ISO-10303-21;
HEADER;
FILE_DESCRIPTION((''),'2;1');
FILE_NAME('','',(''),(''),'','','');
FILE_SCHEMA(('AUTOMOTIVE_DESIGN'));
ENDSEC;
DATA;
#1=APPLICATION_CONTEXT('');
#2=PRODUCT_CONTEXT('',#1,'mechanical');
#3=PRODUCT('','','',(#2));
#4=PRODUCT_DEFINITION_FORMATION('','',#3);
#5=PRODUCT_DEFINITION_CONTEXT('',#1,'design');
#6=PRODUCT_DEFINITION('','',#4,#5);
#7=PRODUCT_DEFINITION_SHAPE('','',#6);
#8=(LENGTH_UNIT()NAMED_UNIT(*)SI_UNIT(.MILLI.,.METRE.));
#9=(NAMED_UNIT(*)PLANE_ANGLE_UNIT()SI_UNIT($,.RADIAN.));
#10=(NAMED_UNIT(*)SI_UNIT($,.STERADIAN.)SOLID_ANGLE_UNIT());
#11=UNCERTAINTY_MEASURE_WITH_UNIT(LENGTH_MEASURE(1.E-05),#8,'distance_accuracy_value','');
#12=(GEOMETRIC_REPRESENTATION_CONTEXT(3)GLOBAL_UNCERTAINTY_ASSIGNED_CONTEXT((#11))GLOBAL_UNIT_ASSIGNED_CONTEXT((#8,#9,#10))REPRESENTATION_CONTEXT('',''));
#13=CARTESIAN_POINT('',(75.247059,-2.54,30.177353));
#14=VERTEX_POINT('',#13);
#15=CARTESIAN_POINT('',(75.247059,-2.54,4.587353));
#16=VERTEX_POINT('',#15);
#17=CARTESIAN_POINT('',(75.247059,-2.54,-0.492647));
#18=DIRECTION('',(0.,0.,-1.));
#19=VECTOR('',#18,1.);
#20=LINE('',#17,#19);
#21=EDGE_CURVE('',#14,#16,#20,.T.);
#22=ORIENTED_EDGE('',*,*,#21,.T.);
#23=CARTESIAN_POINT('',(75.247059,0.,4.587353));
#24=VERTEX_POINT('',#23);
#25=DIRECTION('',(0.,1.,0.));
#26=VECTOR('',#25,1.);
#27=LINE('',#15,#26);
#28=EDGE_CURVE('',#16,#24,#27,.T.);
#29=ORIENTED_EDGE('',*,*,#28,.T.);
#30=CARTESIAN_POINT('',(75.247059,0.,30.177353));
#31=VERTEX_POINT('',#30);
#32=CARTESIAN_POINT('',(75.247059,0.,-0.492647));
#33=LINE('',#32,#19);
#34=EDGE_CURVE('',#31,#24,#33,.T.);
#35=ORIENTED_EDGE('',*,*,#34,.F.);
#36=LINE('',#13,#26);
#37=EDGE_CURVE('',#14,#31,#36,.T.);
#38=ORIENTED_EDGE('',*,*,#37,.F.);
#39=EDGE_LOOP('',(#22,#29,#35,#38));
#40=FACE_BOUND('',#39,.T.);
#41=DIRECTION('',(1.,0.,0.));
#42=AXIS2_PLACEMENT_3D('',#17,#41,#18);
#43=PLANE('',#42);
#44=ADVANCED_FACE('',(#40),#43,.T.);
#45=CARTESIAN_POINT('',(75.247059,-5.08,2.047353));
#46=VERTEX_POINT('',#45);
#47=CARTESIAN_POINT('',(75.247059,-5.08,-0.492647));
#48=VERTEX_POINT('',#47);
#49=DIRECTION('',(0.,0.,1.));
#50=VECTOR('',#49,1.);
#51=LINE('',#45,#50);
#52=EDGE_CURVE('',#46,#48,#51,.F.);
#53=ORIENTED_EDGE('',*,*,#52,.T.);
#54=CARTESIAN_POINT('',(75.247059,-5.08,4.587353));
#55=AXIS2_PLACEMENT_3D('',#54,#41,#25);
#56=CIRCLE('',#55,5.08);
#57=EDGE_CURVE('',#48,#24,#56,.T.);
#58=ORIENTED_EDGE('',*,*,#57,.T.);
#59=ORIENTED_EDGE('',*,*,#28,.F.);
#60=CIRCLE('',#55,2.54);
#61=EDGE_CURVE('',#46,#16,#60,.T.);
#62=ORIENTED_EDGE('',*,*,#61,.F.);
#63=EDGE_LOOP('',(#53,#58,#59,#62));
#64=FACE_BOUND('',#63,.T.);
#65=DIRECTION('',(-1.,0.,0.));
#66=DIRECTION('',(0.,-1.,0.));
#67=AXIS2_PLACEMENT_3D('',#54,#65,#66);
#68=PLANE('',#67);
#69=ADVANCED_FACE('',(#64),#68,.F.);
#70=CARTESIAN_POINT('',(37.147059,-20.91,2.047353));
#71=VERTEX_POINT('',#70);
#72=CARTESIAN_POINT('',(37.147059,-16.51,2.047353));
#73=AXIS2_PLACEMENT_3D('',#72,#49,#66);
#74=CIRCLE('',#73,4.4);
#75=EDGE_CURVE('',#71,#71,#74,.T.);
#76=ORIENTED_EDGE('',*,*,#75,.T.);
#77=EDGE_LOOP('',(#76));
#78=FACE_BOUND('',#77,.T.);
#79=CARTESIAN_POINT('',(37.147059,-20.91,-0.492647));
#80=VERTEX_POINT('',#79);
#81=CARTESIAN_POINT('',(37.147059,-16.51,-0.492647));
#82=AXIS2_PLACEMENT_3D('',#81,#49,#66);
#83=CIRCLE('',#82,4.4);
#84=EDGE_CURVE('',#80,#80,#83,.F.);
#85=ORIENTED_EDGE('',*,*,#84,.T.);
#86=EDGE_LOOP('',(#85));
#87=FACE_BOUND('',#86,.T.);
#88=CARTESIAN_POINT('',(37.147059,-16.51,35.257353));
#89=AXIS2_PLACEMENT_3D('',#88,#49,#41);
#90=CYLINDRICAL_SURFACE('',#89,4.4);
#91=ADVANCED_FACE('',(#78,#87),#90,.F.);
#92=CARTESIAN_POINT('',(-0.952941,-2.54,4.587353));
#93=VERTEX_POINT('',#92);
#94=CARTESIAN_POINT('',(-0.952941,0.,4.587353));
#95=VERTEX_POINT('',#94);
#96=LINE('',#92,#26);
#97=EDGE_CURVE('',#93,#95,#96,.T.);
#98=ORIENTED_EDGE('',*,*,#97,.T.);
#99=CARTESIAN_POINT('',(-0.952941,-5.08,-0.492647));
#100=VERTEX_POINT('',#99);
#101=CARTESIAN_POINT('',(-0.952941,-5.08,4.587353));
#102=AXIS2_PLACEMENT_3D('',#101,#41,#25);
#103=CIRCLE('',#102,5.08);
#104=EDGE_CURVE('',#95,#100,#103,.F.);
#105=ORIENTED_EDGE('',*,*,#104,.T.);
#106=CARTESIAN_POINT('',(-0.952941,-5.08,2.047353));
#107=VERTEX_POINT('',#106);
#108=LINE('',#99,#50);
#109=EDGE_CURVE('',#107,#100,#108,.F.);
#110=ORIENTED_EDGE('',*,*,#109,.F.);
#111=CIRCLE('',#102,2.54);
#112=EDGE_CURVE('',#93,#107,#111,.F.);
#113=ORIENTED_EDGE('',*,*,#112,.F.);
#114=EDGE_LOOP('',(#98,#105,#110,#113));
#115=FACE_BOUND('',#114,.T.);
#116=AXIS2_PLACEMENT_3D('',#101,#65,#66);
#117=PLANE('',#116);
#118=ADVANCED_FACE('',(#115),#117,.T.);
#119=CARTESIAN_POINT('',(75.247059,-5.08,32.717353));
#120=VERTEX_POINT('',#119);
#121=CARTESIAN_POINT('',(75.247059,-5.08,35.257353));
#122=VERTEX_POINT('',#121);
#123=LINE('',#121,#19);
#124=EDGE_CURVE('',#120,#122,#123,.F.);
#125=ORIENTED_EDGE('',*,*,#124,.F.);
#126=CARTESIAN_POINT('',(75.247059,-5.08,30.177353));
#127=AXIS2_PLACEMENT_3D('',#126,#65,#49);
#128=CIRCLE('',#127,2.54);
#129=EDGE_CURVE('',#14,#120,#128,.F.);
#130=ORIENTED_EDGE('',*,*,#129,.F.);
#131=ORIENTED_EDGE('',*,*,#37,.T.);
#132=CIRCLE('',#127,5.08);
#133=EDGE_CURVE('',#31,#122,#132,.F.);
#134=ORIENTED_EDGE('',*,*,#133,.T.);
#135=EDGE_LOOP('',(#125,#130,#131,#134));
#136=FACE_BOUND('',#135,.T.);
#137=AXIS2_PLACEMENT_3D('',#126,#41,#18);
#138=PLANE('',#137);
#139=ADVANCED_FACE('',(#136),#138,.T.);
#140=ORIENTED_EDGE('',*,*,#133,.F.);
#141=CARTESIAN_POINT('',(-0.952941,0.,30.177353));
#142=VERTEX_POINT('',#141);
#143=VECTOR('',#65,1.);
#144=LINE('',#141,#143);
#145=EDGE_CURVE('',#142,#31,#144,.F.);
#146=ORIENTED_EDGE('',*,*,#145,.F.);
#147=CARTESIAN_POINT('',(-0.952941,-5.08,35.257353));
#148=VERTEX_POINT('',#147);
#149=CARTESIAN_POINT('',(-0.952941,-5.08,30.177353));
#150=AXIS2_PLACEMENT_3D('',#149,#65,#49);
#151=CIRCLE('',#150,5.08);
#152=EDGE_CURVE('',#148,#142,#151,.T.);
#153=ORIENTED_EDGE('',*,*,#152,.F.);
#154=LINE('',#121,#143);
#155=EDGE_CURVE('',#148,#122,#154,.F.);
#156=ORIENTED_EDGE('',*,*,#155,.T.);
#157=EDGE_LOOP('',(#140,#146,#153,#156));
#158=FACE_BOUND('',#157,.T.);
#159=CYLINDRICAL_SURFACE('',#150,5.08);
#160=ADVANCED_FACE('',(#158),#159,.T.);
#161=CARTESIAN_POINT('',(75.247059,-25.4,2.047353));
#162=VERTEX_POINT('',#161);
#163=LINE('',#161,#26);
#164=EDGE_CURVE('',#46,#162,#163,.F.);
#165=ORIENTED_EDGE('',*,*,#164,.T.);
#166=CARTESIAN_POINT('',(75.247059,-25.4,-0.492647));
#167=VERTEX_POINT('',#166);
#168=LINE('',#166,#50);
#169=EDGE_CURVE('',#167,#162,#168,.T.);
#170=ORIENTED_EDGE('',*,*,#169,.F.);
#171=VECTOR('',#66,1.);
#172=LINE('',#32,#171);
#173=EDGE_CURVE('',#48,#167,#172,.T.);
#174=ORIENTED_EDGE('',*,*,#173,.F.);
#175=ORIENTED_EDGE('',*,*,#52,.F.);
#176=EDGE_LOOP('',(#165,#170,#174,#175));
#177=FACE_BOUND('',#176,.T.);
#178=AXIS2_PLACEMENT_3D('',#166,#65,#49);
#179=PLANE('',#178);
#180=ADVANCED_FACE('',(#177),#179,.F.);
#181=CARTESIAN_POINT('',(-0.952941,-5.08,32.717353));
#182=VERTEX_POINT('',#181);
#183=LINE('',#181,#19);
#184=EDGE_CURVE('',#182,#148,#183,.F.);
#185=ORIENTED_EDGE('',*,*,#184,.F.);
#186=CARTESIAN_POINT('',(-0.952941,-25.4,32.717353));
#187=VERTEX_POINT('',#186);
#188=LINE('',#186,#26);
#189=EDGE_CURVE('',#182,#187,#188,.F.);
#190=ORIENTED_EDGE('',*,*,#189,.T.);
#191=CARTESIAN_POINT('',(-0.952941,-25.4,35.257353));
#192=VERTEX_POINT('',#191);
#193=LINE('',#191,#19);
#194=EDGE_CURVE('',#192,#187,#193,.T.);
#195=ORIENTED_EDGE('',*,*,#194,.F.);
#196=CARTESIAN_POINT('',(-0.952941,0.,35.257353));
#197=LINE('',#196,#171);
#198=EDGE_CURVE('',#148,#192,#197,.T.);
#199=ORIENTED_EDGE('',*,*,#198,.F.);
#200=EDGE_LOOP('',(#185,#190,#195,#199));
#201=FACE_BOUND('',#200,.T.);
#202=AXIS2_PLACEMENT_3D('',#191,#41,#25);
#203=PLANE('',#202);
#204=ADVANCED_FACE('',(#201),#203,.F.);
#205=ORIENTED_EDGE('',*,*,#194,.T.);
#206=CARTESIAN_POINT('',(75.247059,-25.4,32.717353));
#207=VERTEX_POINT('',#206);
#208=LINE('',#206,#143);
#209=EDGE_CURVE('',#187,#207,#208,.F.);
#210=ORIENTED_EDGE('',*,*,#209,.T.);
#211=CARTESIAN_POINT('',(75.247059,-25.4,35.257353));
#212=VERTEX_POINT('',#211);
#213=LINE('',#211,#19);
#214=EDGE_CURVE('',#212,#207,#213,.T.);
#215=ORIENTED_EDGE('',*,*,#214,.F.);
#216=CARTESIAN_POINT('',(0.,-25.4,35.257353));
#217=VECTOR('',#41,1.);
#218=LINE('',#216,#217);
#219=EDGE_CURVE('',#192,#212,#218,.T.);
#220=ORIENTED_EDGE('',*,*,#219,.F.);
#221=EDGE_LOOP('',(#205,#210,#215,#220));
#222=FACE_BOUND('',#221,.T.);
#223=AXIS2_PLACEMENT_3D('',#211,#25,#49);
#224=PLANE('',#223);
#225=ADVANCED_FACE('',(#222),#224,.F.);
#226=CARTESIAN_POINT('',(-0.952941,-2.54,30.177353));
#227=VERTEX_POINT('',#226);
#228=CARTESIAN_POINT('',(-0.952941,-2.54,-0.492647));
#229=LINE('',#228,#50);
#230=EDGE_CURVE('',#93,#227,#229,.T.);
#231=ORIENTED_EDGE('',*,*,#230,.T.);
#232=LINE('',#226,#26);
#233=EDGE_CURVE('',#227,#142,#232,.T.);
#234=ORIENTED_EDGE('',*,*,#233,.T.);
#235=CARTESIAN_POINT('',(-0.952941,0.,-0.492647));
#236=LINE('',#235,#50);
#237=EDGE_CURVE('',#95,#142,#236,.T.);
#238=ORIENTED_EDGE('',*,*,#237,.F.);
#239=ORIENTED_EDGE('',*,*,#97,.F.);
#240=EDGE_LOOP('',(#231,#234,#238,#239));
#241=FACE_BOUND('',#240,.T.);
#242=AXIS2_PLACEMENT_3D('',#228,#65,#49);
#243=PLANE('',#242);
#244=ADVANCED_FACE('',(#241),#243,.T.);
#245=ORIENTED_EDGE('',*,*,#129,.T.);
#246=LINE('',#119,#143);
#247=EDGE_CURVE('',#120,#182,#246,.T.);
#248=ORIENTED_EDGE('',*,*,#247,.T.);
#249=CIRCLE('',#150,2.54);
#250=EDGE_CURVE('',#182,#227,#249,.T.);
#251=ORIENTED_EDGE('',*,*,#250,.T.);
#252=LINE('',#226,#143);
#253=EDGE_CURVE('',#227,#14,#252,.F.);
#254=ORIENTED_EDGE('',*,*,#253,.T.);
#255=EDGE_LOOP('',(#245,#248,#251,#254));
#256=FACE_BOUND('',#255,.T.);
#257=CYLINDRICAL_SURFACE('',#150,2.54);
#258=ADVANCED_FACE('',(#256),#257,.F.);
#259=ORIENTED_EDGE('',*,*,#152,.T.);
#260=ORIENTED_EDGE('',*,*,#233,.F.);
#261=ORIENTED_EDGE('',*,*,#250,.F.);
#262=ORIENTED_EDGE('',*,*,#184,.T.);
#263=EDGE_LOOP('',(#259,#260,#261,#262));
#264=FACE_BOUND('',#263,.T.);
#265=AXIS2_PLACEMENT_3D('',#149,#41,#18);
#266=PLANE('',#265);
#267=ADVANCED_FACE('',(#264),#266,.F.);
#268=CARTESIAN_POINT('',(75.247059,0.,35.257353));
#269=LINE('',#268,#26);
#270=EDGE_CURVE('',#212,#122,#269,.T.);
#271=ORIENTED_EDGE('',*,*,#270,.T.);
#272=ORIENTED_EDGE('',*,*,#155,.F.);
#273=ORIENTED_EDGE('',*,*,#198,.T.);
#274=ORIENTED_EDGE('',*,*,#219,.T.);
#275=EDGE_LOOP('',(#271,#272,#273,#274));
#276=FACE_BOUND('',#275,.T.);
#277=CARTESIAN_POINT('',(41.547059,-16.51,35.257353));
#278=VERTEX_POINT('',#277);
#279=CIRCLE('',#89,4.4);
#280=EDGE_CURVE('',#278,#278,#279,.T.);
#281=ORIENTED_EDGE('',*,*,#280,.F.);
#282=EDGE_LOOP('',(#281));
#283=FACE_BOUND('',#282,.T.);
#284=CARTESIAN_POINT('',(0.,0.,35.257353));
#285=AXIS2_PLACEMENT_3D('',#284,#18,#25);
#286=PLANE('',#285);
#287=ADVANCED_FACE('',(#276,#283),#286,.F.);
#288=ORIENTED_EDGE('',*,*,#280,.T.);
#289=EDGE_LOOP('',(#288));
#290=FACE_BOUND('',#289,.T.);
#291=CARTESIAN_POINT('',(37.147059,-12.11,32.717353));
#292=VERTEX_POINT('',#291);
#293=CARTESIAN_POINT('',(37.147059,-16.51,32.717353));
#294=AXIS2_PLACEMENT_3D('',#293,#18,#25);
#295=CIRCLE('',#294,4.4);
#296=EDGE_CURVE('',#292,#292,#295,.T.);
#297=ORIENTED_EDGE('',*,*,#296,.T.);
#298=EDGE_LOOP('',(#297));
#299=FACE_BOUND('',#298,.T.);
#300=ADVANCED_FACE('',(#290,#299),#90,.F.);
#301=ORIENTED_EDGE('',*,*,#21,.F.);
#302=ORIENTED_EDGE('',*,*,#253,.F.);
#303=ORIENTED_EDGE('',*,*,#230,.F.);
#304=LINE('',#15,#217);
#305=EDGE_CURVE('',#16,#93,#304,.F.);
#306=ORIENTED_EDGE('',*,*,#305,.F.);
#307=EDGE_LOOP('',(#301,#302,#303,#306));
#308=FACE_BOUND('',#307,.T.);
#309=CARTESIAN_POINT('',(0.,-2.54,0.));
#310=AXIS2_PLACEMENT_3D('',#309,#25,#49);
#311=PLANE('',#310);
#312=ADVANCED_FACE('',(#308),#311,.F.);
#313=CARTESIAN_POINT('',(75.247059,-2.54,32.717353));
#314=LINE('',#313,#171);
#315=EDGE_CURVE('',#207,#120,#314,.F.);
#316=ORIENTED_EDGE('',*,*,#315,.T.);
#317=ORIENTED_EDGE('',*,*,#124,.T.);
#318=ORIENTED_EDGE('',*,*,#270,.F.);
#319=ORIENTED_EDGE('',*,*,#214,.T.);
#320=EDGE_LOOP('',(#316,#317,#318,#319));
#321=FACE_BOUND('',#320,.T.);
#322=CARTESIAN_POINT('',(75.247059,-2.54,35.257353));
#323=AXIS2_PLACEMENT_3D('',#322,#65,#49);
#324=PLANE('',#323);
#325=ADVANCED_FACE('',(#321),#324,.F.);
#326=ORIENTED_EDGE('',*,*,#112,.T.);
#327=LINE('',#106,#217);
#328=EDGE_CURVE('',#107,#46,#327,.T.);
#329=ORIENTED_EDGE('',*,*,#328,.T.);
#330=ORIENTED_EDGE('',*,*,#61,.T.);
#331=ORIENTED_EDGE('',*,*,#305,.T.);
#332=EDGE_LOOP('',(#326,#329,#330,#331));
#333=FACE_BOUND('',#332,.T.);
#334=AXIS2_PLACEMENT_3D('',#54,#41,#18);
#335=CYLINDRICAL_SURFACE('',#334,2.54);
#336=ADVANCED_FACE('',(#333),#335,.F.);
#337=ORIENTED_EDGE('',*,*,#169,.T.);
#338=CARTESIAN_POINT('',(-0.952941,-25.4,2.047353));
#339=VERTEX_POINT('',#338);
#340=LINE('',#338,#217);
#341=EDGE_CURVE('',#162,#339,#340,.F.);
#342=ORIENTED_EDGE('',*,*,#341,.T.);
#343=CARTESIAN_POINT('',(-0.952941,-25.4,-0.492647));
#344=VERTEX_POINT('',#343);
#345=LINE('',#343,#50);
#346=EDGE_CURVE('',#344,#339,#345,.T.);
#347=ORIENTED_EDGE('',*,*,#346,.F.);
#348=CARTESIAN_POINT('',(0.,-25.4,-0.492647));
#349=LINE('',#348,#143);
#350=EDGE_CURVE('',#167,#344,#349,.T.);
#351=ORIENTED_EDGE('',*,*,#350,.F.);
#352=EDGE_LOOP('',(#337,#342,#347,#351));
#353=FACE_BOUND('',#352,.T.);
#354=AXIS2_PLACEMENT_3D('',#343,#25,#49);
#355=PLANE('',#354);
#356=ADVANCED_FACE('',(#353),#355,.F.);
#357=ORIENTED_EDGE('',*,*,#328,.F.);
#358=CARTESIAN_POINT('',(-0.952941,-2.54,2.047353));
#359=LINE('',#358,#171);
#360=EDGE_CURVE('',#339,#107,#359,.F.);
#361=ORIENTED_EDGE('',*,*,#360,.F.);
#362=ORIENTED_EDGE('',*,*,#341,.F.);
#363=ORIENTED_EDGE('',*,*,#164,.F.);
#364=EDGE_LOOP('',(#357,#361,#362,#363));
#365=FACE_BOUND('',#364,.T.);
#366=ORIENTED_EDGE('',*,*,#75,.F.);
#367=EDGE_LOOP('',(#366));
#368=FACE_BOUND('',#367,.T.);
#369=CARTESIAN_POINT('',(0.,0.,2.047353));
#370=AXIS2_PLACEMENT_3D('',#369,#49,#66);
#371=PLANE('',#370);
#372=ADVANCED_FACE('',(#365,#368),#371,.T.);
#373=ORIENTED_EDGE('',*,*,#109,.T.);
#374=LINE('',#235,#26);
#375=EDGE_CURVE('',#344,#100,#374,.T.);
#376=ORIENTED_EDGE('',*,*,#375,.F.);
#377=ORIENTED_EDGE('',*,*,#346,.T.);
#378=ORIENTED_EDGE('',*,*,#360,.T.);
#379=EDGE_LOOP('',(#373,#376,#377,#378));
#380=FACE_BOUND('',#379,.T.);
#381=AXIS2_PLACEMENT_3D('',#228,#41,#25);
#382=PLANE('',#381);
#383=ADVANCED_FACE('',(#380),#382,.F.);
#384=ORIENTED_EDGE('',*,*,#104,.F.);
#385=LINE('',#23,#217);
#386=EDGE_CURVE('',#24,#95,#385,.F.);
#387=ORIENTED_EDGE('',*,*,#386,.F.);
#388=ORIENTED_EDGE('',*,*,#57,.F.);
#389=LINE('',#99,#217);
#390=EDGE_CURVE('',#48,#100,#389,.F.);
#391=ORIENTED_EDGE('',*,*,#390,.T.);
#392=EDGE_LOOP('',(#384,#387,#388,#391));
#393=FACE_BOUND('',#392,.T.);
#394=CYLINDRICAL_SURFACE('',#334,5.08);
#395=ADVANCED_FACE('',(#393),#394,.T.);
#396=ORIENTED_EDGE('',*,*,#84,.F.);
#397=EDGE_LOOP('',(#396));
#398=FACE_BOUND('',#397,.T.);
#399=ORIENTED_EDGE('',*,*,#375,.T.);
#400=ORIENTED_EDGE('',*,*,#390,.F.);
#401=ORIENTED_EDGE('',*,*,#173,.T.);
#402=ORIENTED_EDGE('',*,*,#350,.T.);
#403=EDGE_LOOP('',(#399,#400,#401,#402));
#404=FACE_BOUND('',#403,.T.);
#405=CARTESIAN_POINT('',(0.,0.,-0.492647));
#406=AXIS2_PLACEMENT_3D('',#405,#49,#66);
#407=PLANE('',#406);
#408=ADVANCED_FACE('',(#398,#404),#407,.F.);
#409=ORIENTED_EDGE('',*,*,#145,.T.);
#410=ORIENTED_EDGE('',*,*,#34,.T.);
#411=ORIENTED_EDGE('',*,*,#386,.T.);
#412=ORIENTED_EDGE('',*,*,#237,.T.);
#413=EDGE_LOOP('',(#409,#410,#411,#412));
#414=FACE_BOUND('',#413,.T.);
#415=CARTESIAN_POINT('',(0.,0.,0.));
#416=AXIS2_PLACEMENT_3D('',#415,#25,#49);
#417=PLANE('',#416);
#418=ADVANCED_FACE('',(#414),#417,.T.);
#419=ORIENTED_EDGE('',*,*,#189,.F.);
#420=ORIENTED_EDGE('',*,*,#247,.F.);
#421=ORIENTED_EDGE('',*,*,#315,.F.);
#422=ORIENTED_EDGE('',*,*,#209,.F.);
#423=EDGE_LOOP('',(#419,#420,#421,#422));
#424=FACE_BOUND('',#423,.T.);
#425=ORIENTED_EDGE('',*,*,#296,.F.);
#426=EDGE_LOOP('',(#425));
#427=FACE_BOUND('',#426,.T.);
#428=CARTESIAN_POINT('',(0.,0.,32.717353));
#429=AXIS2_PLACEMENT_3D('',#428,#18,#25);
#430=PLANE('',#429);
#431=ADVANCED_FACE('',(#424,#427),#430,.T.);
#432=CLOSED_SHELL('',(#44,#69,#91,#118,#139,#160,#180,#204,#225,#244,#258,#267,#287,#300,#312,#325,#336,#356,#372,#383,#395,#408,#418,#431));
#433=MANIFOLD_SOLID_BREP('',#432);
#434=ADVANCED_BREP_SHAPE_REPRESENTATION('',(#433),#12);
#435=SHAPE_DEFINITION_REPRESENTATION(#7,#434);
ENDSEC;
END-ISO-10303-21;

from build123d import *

# Parameters (mm, degrees)
SKETCH1_W                         = 76.2
SKETCH1_H                         = 35.75
BASE_FLANGE1_DEPTH                = 2.54
EDGE_FLANGE1_STRIP_W              = 15.24
EDGE_FLANGE1_STRIP_H              = 2.54
EDGE_FLANGE1_STRIP_CUT_DEPTH      = 76.2
EDGE_FLANGE1_STRIP_2_W            = 15.24
EDGE_FLANGE1_STRIP_2_H            = 2.54
EDGE_FLANGE1_STRIP_CUT_2_DEPTH    = 76.2
EDGE_FLANGE1_DEPTH                = 76.2
EDGE_FLANGE1_BEND_DEPTH           = 76.2
TAP_DRILL_FOR_M10X1_25_TAP1_D     = 8.8
TAP_DRILL_FOR_M10X1_25_TAP1_DEPTH = 35.75
TAP_DRILL_FOR_M10X1_25_TAP1_TIP   = 2.643786724


# Sheet-metal steps are written as plain solids
with BuildPart() as part:
    # Sketch1 → Base-Flange1 (new body)
    with BuildSketch(Plane(origin=(0, 0, 0), x_dir=(1, 0, 0), z_dir=(0, 1, 0))):
        with Locations((37.147058824, -17.382352941)):
            Rectangle(SKETCH1_W, SKETCH1_H)
    extrude(amount=-BASE_FLANGE1_DEPTH)

    # Edge-Flange1 strip (across the edge) → Edge-Flange1 strip cut (cut)
    with BuildSketch(Plane(origin=(75.247058824, -2.54, 35.257352941), x_dir=(0, 0, -1), z_dir=(-1, 0, 0))):
        with Locations((-2.54, -1.27)):
            Rectangle(EDGE_FLANGE1_STRIP_W, EDGE_FLANGE1_STRIP_H)
    extrude(amount=EDGE_FLANGE1_STRIP_CUT_DEPTH, mode=Mode.SUBTRACT)

    # Edge-Flange1 strip 2 (across the edge) → Edge-Flange1 strip cut 2 (cut)
    with BuildSketch(Plane(origin=(-0.952941176, -2.54, -0.492647059), x_dir=(0, 0, 1), z_dir=(1, 0, 0))):
        with Locations((-2.54, -1.27)):
            Rectangle(EDGE_FLANGE1_STRIP_2_W, EDGE_FLANGE1_STRIP_2_H)
    extrude(amount=EDGE_FLANGE1_STRIP_CUT_2_DEPTH, mode=Mode.SUBTRACT)

    # Edge-Flange1 section (across the edge) → Edge-Flange1 (add)
    with BuildSketch(Plane(origin=(75.247058824, -2.54, 35.257352941), x_dir=(0, 0, -1), z_dir=(-1, 0, 0))):
        with BuildLine():
            Line((0, 2.54), (0, 22.86))
            Line((0, 22.86), (2.54, 22.86))
            Line((2.54, 22.86), (2.54, 2.54))
            ThreePointArc((2.54, 2.54), (3.283948776, 0.743948776), (5.08, 0))
            Line((5.08, 0), (5.08, -2.54))
            ThreePointArc((5.08, -2.54), (1.487897552, -1.052102448), (0, 2.54))
        make_face()
    extrude(amount=EDGE_FLANGE1_DEPTH)

    # Edge-Flange1 section 2 (across the edge) → Edge-Flange1 bend (add)
    with BuildSketch(Plane(origin=(-0.952941176, -2.54, -0.492647059), x_dir=(0, 0, 1), z_dir=(1, 0, 0))):
        with BuildLine():
            Line((0, 2.54), (0, 22.86))
            Line((0, 22.86), (2.54, 22.86))
            Line((2.54, 22.86), (2.54, 2.54))
            ThreePointArc((2.54, 2.54), (3.283948776, 0.743948776), (5.08, 0))
            Line((5.08, 0), (5.08, -2.54))
            ThreePointArc((5.08, -2.54), (1.487897552, -1.052102448), (0, 2.54))
        make_face()
    extrude(amount=EDGE_FLANGE1_BEND_DEPTH)

    # Tap Drill for M10x1.25 Tap1
    with Locations(Plane.XY.offset(35.257352941)):
        with Locations((37.147058824, -16.51)):
            Hole(TAP_DRILL_FOR_M10X1_25_TAP1_D / 2, depth=TAP_DRILL_FOR_M10X1_25_TAP1_DEPTH)
            with Locations((0, 0, -(TAP_DRILL_FOR_M10X1_25_TAP1_DEPTH + TAP_DRILL_FOR_M10X1_25_TAP1_TIP / 2))):  # 118° drill point
                Cone(0, TAP_DRILL_FOR_M10X1_25_TAP1_D / 2, TAP_DRILL_FOR_M10X1_25_TAP1_TIP, mode=Mode.SUBTRACT)


solid = part.part
